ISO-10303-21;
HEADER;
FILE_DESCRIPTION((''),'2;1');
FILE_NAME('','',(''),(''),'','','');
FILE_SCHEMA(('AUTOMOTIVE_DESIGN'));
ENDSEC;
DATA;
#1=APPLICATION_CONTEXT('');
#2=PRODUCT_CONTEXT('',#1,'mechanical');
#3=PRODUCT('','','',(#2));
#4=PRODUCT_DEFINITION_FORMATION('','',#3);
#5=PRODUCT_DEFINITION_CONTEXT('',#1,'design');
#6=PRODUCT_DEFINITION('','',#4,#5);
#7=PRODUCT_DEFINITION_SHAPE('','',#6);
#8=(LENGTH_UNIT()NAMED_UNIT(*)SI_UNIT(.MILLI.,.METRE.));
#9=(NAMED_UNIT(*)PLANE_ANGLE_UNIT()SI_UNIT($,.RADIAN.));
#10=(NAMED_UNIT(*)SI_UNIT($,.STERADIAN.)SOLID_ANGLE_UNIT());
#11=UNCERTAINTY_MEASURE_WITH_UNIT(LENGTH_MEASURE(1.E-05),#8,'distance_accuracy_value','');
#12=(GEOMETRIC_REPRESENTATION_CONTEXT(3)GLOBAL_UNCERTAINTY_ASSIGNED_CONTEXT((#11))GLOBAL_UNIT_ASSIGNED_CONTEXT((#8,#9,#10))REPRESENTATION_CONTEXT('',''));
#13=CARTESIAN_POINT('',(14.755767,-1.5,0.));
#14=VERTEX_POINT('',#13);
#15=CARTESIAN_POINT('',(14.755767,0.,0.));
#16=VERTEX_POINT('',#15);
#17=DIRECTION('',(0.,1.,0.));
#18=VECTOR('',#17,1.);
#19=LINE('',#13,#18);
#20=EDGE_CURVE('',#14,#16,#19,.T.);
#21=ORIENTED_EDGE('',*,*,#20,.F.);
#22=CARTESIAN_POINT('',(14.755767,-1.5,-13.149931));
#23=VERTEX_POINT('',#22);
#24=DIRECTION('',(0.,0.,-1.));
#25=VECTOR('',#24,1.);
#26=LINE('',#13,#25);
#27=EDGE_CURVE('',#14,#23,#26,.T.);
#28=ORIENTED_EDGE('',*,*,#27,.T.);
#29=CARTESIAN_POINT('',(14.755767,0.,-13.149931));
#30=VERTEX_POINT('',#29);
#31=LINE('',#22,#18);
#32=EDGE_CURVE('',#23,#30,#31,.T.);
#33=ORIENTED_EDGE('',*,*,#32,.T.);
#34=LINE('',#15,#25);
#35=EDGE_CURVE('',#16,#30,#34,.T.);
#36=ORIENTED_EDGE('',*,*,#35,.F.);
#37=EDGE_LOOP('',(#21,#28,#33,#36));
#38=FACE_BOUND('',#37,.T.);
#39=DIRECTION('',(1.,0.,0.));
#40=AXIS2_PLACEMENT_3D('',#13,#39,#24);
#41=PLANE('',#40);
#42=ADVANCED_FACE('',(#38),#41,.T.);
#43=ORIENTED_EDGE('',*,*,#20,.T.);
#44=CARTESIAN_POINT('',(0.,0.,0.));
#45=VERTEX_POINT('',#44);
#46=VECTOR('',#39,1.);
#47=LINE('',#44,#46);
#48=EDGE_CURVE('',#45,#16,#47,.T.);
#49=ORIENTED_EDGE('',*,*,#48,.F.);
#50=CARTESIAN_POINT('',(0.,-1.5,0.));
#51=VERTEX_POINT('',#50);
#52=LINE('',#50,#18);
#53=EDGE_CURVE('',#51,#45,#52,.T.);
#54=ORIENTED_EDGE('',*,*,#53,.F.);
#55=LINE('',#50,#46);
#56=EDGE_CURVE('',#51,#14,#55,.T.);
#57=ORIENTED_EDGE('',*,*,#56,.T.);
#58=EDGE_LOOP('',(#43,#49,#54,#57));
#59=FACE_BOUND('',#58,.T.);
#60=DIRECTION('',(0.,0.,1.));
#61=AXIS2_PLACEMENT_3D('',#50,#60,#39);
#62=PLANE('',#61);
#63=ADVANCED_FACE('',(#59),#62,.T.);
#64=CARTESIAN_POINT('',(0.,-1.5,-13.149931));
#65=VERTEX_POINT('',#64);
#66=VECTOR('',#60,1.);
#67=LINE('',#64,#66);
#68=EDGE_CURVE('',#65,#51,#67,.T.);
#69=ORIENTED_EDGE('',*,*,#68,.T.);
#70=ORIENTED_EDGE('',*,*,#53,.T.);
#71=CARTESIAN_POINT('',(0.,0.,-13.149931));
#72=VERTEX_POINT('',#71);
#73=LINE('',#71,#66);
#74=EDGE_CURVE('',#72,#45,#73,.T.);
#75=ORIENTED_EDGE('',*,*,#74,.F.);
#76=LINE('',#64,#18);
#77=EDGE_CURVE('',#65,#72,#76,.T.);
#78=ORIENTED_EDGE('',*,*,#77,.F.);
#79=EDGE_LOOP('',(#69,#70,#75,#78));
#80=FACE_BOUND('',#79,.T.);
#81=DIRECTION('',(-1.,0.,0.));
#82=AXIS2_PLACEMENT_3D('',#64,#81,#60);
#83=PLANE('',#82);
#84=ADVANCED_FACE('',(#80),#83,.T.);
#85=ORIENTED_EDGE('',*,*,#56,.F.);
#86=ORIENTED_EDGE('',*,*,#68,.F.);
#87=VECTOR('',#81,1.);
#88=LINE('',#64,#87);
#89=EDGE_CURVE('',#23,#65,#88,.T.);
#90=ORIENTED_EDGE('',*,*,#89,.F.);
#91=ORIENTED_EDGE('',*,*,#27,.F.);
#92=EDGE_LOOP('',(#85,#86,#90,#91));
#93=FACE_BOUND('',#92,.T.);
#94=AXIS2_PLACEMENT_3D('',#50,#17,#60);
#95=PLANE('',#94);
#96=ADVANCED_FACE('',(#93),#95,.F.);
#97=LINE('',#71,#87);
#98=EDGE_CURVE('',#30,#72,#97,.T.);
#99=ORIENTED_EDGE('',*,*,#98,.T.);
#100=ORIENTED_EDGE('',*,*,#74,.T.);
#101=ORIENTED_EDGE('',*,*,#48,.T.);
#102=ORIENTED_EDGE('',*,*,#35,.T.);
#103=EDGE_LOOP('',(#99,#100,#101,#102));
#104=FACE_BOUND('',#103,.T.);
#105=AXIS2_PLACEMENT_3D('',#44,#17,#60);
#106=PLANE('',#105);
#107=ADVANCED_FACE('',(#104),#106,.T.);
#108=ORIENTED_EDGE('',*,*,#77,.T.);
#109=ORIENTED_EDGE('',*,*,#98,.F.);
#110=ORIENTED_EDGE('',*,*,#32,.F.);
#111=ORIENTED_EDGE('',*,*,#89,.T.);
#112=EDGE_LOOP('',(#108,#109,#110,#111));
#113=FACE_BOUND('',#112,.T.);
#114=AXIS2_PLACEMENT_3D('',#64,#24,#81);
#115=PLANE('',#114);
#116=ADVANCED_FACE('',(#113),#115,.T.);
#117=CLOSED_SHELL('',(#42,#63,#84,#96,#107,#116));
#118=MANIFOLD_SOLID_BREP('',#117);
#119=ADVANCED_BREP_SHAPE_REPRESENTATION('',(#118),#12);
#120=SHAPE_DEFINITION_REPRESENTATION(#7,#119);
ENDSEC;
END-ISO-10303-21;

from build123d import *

# Parameters (mm, degrees)
SKETCH_1_W             = 14.75576732
SKETCH_1_H             = 13.149930719
SM_BASE_FLANGE_1_DEPTH = 1.5


# Sheet-metal steps are written as plain solids
with BuildPart() as part:
    # Sketch 1 → Базовая кромка1 (new body)
    with BuildSketch(Plane(origin=(0, 0, 0), x_dir=(1, 0, 0), z_dir=(0, 1, 0))):
        with Locations((7.37788366, 6.57496536)):
            Rectangle(SKETCH_1_W, SKETCH_1_H)
    extrude(amount=-SM_BASE_FLANGE_1_DEPTH)


solid = part.part
